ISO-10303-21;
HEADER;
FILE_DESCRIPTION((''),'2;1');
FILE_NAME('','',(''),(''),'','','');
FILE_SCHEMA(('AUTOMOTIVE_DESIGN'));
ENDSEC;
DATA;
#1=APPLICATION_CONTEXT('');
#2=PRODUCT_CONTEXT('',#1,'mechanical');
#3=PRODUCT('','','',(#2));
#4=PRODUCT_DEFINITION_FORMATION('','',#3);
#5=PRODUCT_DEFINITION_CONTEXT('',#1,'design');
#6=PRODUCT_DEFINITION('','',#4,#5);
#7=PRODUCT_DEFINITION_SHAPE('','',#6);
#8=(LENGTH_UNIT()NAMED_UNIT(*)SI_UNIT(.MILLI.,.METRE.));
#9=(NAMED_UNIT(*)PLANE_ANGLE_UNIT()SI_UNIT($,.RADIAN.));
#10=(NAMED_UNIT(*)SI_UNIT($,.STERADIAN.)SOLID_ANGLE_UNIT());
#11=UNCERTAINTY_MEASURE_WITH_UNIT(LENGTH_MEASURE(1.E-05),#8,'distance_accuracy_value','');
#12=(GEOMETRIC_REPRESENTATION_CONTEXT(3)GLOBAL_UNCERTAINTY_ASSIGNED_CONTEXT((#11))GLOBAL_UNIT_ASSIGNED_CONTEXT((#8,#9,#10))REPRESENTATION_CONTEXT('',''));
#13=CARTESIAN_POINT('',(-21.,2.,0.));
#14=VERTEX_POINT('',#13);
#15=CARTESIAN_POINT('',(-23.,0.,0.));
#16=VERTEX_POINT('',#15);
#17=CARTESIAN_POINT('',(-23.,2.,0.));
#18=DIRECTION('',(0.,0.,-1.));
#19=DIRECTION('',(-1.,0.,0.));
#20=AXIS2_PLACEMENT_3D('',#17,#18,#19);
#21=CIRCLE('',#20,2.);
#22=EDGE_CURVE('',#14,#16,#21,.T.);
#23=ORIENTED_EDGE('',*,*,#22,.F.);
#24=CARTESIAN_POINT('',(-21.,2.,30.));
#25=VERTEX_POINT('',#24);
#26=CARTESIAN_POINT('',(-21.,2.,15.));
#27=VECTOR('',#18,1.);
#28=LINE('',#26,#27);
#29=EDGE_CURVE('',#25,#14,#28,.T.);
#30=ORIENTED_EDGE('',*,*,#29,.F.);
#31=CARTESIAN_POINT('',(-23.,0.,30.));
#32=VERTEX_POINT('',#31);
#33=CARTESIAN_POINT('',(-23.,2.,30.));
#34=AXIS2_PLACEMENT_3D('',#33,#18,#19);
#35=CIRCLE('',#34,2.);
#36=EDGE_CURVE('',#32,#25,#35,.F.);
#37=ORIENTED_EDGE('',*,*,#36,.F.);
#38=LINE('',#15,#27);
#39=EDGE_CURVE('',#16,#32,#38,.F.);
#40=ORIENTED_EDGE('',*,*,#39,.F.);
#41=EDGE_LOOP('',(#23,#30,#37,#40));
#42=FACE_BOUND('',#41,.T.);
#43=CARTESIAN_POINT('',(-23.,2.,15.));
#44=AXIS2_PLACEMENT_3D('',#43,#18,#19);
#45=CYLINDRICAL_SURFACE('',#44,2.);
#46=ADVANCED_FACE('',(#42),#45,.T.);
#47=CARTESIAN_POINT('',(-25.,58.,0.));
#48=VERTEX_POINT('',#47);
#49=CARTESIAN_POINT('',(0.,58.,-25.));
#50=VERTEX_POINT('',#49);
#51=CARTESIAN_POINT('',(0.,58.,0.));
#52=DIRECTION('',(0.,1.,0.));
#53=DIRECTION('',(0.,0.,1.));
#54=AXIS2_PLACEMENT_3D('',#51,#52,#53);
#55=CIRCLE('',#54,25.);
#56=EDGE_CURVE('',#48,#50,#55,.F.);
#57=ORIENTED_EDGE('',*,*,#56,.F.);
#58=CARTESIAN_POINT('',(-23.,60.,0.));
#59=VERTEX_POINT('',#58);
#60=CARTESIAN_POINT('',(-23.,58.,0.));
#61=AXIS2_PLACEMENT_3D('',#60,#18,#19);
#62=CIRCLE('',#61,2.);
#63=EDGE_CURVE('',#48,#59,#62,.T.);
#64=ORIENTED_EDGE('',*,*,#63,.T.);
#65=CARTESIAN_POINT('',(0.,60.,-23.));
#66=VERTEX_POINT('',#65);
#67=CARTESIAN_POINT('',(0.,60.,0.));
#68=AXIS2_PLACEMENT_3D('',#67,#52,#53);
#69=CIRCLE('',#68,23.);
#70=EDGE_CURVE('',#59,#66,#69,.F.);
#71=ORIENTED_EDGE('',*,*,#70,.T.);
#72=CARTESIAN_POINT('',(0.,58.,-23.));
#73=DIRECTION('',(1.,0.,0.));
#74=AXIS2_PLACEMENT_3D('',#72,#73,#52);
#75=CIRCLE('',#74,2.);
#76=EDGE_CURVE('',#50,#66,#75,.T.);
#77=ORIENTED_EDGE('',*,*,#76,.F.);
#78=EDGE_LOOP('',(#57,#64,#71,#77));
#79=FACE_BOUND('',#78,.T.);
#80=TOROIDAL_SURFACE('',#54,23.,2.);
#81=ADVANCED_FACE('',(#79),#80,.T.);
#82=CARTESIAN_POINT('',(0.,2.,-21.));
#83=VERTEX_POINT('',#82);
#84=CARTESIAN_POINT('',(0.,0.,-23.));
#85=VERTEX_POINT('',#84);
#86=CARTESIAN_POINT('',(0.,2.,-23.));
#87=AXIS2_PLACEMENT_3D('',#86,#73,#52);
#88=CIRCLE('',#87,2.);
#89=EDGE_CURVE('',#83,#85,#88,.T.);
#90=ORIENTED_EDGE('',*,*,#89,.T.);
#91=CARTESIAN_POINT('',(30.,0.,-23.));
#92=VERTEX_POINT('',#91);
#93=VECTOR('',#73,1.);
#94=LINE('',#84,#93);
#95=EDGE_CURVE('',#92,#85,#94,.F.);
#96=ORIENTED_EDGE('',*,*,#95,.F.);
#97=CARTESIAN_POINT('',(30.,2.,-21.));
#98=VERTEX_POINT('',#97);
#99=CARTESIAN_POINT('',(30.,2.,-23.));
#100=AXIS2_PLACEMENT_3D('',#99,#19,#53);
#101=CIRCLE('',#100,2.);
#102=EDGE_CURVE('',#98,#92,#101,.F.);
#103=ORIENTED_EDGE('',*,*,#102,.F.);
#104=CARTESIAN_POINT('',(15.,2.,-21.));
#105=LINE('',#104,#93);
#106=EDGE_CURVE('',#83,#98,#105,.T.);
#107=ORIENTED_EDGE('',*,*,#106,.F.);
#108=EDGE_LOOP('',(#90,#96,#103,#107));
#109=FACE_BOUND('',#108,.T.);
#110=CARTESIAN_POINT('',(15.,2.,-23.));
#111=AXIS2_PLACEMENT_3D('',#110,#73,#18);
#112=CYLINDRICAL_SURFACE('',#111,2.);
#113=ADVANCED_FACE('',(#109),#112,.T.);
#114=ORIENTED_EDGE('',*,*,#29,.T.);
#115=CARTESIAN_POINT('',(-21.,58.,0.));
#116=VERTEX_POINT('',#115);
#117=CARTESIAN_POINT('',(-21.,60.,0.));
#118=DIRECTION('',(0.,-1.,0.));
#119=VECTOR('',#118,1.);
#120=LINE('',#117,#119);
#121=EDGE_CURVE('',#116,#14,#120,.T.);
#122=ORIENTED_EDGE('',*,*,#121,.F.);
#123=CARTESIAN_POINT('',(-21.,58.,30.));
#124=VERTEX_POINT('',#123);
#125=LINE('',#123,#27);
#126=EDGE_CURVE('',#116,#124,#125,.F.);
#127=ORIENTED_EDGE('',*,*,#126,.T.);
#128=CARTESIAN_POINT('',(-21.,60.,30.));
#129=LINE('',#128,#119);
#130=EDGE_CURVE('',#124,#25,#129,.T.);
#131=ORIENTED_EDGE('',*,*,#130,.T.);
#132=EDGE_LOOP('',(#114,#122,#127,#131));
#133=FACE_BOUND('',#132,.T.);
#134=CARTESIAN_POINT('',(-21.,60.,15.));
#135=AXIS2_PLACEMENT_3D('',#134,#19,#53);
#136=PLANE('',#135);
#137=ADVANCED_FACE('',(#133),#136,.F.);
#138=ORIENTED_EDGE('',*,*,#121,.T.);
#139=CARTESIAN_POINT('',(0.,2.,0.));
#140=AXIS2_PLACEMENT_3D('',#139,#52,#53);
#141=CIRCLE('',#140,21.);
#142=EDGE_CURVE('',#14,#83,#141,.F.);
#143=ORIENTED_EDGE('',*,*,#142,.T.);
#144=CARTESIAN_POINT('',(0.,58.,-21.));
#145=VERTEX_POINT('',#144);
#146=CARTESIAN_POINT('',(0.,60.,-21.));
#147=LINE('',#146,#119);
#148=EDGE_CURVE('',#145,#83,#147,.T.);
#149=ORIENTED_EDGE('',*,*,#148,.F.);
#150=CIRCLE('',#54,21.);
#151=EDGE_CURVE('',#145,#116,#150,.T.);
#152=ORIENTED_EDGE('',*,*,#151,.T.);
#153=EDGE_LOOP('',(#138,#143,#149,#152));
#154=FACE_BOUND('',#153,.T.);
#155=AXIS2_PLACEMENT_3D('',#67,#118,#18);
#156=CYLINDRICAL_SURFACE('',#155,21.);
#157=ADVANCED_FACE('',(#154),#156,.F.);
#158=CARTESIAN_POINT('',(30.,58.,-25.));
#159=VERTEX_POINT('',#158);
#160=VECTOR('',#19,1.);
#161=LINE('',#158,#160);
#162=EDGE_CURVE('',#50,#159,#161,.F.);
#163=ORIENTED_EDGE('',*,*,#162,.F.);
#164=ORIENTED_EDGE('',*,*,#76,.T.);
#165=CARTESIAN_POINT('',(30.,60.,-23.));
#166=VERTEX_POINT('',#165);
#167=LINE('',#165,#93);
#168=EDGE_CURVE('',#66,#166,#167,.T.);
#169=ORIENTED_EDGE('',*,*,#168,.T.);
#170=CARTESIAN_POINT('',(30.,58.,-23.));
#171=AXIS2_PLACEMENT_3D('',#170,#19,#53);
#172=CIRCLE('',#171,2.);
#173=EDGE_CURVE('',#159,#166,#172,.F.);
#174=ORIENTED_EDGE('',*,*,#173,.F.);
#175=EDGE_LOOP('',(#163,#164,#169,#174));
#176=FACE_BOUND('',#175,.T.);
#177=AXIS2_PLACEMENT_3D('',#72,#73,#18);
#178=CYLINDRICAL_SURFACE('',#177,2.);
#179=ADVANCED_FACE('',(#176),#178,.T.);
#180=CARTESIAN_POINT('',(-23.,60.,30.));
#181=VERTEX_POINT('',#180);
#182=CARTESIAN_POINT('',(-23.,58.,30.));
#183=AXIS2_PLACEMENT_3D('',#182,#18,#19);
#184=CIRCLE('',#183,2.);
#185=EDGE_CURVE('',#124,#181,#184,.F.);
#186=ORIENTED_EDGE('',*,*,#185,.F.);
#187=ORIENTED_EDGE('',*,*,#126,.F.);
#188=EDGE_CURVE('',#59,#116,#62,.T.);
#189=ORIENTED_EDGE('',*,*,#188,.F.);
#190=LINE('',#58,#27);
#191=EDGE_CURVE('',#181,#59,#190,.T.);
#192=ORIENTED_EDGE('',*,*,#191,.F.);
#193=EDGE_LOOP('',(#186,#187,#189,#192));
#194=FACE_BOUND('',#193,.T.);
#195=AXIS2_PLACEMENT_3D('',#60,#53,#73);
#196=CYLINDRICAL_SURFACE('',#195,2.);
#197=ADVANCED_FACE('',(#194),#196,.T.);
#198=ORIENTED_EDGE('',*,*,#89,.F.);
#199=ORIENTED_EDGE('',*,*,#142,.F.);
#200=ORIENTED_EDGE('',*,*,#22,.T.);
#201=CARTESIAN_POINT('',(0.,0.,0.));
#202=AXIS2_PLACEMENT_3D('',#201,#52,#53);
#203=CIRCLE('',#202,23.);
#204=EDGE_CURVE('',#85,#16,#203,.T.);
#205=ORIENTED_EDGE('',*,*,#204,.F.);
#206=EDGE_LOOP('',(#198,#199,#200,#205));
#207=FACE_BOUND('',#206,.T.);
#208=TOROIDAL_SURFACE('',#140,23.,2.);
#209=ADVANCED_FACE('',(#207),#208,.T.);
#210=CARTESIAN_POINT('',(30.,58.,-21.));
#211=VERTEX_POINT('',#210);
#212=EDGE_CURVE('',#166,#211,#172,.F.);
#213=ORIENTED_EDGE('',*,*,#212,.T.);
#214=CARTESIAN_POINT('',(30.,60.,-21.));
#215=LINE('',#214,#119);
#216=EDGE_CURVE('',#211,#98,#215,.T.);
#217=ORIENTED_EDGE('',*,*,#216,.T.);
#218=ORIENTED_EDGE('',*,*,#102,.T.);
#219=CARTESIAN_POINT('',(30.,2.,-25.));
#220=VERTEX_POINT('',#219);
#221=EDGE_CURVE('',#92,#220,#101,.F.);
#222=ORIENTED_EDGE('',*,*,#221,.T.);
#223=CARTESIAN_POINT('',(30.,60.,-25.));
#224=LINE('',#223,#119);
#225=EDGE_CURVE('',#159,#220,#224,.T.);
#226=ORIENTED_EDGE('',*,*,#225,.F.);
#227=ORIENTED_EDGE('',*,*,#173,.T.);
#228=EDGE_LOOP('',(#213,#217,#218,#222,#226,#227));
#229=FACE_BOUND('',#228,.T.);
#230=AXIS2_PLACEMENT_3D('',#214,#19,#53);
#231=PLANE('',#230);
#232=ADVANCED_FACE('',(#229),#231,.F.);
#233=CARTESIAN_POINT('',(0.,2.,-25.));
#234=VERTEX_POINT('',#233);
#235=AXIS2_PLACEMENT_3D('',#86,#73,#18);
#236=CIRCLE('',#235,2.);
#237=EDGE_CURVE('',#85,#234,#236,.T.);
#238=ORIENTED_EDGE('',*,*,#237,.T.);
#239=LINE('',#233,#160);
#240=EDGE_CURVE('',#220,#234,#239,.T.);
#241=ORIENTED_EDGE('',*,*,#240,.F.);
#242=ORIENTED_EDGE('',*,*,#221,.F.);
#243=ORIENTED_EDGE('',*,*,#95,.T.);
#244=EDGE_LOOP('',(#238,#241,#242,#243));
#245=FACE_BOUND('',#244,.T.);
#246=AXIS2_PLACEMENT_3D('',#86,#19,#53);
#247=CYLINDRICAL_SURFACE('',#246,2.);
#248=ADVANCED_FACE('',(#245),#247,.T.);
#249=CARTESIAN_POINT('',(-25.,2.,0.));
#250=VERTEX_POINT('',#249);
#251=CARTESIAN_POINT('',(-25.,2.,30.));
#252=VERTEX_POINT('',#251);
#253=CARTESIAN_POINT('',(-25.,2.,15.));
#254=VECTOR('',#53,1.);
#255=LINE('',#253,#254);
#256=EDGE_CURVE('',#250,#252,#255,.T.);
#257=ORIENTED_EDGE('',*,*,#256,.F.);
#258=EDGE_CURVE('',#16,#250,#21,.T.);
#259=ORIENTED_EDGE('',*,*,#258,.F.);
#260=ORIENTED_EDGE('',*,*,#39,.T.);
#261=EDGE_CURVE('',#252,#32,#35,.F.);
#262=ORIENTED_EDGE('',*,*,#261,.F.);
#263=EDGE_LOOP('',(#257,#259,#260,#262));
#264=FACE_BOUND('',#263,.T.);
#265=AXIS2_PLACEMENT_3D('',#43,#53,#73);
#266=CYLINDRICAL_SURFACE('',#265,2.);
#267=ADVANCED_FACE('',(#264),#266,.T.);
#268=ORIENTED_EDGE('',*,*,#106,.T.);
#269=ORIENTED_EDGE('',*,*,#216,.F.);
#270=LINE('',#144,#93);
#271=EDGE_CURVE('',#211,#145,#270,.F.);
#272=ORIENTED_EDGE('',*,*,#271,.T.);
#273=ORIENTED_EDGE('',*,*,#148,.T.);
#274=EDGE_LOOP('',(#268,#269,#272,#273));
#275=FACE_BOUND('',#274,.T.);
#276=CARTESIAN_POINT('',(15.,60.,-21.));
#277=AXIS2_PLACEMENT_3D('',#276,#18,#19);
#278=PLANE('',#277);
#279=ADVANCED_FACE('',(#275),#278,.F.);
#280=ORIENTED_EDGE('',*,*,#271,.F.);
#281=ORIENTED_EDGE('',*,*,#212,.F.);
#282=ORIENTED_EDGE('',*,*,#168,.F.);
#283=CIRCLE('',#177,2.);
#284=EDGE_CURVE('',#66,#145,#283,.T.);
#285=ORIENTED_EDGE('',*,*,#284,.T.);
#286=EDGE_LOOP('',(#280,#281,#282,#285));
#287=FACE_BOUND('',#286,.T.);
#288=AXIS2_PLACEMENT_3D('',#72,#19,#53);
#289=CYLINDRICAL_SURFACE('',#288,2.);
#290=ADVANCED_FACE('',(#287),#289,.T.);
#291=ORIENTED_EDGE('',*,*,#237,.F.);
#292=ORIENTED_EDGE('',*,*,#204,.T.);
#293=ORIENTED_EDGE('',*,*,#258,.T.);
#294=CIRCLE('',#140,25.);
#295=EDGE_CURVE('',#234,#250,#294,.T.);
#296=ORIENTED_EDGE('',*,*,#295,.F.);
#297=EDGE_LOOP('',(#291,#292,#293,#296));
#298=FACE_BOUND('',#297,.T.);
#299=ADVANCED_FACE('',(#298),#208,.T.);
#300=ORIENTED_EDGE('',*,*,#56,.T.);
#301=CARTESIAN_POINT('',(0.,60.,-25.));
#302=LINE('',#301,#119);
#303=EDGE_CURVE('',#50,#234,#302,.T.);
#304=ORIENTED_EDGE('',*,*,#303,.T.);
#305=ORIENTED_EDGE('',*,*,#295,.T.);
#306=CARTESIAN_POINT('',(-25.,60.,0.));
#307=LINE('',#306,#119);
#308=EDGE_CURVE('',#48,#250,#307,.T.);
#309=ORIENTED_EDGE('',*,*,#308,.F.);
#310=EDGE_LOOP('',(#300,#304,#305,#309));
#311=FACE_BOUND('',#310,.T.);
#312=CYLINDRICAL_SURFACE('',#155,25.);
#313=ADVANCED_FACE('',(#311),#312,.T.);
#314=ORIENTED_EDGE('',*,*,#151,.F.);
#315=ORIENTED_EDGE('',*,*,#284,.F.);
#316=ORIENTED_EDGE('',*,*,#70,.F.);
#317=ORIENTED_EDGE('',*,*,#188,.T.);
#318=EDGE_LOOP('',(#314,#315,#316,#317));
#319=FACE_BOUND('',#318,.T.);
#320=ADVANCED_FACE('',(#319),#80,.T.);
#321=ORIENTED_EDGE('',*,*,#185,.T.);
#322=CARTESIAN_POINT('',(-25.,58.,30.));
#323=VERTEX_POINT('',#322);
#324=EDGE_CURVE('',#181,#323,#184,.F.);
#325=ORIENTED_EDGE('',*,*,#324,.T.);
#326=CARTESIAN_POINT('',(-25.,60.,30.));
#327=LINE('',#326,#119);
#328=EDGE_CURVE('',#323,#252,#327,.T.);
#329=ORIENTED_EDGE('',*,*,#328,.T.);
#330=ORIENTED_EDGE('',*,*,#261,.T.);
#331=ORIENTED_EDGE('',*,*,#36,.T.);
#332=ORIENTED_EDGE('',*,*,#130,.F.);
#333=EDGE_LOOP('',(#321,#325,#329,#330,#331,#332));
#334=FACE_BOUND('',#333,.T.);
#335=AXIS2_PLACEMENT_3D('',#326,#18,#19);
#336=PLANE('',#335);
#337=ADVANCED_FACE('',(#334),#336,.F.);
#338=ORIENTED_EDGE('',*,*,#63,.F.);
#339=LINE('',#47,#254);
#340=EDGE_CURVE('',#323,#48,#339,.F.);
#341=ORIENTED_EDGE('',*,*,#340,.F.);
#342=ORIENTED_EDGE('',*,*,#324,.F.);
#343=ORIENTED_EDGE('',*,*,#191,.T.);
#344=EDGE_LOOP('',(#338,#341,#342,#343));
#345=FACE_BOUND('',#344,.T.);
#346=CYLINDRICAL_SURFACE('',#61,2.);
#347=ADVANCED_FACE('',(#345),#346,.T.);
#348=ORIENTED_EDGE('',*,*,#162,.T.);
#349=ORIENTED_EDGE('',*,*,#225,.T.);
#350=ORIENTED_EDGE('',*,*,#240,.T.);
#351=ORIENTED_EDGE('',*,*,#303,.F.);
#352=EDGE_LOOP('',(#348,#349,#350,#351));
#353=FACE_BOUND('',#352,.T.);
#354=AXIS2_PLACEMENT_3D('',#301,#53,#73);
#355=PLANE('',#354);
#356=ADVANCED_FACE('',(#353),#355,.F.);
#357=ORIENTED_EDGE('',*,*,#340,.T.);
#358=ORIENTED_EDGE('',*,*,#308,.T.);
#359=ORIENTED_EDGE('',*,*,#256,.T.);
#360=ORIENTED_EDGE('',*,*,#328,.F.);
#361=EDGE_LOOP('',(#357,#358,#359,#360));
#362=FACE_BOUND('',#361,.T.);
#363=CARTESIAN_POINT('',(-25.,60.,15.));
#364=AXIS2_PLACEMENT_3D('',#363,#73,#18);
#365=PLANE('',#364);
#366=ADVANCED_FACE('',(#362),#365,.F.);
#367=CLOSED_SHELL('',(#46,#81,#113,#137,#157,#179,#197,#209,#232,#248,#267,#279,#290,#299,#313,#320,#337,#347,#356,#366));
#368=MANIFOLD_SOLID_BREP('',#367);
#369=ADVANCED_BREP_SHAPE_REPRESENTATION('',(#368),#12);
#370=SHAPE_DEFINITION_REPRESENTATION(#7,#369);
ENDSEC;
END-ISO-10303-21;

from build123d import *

# Parameters (mm, degrees)
BOSS_EXTRUDE1_DEPTH = 60
FILLET1_R           = 2


with BuildPart() as part:
    # Sketch1 → Boss-Extrude1 (new body)
    with BuildSketch(Plane(origin=(0, 0, 0), x_dir=(1, 0, 0), z_dir=(0, 1, 0))):
        with BuildLine():
            Line((-25, 0), (-25, -15))
            Line((-25, -15), (-25, -30))
            Line((-25, -30), (-21, -30))
            Line((-21, -30), (-21, -15))
            Line((-21, -15), (-21, 0))
            ThreePointArc((-21, 0), (-14.849242405, 14.849242405), (0, 21))
            Line((0, 21), (15, 21))
            Line((15, 21), (30, 21))
            Line((30, 21), (30, 25))
            Line((30, 25), (15, 25))
            Line((15, 25), (0, 25))
            ThreePointArc((0, 25), (-17.67766953, 17.67766953), (-25, 0))
        make_face()
    extrude(amount=BOSS_EXTRUDE1_DEPTH)

    # Fillet1
    fillet1_edges = [part.edges().sort_by_distance(p)[0] for p in [
        (15, 0, -25),
        (-25, 0, 15),
        (-21, 0, 15),
        (15, 0, -21),
        (15, 60, -25),
        (-25, 60, 15),
        (-21, 60, 15),
        (15, 60, -21),
        (-17.67766953, 0, -17.67766953),
        (-14.849242405, 0, -14.849242405),
        (-17.67766953, 60, -17.67766953),
        (-14.849242405, 60, -14.849242405),
    ]]
    fillet(fillet1_edges, radius=FILLET1_R - 0.0001)  # a hair under: the kernel refuses the full size


solid = part.part
